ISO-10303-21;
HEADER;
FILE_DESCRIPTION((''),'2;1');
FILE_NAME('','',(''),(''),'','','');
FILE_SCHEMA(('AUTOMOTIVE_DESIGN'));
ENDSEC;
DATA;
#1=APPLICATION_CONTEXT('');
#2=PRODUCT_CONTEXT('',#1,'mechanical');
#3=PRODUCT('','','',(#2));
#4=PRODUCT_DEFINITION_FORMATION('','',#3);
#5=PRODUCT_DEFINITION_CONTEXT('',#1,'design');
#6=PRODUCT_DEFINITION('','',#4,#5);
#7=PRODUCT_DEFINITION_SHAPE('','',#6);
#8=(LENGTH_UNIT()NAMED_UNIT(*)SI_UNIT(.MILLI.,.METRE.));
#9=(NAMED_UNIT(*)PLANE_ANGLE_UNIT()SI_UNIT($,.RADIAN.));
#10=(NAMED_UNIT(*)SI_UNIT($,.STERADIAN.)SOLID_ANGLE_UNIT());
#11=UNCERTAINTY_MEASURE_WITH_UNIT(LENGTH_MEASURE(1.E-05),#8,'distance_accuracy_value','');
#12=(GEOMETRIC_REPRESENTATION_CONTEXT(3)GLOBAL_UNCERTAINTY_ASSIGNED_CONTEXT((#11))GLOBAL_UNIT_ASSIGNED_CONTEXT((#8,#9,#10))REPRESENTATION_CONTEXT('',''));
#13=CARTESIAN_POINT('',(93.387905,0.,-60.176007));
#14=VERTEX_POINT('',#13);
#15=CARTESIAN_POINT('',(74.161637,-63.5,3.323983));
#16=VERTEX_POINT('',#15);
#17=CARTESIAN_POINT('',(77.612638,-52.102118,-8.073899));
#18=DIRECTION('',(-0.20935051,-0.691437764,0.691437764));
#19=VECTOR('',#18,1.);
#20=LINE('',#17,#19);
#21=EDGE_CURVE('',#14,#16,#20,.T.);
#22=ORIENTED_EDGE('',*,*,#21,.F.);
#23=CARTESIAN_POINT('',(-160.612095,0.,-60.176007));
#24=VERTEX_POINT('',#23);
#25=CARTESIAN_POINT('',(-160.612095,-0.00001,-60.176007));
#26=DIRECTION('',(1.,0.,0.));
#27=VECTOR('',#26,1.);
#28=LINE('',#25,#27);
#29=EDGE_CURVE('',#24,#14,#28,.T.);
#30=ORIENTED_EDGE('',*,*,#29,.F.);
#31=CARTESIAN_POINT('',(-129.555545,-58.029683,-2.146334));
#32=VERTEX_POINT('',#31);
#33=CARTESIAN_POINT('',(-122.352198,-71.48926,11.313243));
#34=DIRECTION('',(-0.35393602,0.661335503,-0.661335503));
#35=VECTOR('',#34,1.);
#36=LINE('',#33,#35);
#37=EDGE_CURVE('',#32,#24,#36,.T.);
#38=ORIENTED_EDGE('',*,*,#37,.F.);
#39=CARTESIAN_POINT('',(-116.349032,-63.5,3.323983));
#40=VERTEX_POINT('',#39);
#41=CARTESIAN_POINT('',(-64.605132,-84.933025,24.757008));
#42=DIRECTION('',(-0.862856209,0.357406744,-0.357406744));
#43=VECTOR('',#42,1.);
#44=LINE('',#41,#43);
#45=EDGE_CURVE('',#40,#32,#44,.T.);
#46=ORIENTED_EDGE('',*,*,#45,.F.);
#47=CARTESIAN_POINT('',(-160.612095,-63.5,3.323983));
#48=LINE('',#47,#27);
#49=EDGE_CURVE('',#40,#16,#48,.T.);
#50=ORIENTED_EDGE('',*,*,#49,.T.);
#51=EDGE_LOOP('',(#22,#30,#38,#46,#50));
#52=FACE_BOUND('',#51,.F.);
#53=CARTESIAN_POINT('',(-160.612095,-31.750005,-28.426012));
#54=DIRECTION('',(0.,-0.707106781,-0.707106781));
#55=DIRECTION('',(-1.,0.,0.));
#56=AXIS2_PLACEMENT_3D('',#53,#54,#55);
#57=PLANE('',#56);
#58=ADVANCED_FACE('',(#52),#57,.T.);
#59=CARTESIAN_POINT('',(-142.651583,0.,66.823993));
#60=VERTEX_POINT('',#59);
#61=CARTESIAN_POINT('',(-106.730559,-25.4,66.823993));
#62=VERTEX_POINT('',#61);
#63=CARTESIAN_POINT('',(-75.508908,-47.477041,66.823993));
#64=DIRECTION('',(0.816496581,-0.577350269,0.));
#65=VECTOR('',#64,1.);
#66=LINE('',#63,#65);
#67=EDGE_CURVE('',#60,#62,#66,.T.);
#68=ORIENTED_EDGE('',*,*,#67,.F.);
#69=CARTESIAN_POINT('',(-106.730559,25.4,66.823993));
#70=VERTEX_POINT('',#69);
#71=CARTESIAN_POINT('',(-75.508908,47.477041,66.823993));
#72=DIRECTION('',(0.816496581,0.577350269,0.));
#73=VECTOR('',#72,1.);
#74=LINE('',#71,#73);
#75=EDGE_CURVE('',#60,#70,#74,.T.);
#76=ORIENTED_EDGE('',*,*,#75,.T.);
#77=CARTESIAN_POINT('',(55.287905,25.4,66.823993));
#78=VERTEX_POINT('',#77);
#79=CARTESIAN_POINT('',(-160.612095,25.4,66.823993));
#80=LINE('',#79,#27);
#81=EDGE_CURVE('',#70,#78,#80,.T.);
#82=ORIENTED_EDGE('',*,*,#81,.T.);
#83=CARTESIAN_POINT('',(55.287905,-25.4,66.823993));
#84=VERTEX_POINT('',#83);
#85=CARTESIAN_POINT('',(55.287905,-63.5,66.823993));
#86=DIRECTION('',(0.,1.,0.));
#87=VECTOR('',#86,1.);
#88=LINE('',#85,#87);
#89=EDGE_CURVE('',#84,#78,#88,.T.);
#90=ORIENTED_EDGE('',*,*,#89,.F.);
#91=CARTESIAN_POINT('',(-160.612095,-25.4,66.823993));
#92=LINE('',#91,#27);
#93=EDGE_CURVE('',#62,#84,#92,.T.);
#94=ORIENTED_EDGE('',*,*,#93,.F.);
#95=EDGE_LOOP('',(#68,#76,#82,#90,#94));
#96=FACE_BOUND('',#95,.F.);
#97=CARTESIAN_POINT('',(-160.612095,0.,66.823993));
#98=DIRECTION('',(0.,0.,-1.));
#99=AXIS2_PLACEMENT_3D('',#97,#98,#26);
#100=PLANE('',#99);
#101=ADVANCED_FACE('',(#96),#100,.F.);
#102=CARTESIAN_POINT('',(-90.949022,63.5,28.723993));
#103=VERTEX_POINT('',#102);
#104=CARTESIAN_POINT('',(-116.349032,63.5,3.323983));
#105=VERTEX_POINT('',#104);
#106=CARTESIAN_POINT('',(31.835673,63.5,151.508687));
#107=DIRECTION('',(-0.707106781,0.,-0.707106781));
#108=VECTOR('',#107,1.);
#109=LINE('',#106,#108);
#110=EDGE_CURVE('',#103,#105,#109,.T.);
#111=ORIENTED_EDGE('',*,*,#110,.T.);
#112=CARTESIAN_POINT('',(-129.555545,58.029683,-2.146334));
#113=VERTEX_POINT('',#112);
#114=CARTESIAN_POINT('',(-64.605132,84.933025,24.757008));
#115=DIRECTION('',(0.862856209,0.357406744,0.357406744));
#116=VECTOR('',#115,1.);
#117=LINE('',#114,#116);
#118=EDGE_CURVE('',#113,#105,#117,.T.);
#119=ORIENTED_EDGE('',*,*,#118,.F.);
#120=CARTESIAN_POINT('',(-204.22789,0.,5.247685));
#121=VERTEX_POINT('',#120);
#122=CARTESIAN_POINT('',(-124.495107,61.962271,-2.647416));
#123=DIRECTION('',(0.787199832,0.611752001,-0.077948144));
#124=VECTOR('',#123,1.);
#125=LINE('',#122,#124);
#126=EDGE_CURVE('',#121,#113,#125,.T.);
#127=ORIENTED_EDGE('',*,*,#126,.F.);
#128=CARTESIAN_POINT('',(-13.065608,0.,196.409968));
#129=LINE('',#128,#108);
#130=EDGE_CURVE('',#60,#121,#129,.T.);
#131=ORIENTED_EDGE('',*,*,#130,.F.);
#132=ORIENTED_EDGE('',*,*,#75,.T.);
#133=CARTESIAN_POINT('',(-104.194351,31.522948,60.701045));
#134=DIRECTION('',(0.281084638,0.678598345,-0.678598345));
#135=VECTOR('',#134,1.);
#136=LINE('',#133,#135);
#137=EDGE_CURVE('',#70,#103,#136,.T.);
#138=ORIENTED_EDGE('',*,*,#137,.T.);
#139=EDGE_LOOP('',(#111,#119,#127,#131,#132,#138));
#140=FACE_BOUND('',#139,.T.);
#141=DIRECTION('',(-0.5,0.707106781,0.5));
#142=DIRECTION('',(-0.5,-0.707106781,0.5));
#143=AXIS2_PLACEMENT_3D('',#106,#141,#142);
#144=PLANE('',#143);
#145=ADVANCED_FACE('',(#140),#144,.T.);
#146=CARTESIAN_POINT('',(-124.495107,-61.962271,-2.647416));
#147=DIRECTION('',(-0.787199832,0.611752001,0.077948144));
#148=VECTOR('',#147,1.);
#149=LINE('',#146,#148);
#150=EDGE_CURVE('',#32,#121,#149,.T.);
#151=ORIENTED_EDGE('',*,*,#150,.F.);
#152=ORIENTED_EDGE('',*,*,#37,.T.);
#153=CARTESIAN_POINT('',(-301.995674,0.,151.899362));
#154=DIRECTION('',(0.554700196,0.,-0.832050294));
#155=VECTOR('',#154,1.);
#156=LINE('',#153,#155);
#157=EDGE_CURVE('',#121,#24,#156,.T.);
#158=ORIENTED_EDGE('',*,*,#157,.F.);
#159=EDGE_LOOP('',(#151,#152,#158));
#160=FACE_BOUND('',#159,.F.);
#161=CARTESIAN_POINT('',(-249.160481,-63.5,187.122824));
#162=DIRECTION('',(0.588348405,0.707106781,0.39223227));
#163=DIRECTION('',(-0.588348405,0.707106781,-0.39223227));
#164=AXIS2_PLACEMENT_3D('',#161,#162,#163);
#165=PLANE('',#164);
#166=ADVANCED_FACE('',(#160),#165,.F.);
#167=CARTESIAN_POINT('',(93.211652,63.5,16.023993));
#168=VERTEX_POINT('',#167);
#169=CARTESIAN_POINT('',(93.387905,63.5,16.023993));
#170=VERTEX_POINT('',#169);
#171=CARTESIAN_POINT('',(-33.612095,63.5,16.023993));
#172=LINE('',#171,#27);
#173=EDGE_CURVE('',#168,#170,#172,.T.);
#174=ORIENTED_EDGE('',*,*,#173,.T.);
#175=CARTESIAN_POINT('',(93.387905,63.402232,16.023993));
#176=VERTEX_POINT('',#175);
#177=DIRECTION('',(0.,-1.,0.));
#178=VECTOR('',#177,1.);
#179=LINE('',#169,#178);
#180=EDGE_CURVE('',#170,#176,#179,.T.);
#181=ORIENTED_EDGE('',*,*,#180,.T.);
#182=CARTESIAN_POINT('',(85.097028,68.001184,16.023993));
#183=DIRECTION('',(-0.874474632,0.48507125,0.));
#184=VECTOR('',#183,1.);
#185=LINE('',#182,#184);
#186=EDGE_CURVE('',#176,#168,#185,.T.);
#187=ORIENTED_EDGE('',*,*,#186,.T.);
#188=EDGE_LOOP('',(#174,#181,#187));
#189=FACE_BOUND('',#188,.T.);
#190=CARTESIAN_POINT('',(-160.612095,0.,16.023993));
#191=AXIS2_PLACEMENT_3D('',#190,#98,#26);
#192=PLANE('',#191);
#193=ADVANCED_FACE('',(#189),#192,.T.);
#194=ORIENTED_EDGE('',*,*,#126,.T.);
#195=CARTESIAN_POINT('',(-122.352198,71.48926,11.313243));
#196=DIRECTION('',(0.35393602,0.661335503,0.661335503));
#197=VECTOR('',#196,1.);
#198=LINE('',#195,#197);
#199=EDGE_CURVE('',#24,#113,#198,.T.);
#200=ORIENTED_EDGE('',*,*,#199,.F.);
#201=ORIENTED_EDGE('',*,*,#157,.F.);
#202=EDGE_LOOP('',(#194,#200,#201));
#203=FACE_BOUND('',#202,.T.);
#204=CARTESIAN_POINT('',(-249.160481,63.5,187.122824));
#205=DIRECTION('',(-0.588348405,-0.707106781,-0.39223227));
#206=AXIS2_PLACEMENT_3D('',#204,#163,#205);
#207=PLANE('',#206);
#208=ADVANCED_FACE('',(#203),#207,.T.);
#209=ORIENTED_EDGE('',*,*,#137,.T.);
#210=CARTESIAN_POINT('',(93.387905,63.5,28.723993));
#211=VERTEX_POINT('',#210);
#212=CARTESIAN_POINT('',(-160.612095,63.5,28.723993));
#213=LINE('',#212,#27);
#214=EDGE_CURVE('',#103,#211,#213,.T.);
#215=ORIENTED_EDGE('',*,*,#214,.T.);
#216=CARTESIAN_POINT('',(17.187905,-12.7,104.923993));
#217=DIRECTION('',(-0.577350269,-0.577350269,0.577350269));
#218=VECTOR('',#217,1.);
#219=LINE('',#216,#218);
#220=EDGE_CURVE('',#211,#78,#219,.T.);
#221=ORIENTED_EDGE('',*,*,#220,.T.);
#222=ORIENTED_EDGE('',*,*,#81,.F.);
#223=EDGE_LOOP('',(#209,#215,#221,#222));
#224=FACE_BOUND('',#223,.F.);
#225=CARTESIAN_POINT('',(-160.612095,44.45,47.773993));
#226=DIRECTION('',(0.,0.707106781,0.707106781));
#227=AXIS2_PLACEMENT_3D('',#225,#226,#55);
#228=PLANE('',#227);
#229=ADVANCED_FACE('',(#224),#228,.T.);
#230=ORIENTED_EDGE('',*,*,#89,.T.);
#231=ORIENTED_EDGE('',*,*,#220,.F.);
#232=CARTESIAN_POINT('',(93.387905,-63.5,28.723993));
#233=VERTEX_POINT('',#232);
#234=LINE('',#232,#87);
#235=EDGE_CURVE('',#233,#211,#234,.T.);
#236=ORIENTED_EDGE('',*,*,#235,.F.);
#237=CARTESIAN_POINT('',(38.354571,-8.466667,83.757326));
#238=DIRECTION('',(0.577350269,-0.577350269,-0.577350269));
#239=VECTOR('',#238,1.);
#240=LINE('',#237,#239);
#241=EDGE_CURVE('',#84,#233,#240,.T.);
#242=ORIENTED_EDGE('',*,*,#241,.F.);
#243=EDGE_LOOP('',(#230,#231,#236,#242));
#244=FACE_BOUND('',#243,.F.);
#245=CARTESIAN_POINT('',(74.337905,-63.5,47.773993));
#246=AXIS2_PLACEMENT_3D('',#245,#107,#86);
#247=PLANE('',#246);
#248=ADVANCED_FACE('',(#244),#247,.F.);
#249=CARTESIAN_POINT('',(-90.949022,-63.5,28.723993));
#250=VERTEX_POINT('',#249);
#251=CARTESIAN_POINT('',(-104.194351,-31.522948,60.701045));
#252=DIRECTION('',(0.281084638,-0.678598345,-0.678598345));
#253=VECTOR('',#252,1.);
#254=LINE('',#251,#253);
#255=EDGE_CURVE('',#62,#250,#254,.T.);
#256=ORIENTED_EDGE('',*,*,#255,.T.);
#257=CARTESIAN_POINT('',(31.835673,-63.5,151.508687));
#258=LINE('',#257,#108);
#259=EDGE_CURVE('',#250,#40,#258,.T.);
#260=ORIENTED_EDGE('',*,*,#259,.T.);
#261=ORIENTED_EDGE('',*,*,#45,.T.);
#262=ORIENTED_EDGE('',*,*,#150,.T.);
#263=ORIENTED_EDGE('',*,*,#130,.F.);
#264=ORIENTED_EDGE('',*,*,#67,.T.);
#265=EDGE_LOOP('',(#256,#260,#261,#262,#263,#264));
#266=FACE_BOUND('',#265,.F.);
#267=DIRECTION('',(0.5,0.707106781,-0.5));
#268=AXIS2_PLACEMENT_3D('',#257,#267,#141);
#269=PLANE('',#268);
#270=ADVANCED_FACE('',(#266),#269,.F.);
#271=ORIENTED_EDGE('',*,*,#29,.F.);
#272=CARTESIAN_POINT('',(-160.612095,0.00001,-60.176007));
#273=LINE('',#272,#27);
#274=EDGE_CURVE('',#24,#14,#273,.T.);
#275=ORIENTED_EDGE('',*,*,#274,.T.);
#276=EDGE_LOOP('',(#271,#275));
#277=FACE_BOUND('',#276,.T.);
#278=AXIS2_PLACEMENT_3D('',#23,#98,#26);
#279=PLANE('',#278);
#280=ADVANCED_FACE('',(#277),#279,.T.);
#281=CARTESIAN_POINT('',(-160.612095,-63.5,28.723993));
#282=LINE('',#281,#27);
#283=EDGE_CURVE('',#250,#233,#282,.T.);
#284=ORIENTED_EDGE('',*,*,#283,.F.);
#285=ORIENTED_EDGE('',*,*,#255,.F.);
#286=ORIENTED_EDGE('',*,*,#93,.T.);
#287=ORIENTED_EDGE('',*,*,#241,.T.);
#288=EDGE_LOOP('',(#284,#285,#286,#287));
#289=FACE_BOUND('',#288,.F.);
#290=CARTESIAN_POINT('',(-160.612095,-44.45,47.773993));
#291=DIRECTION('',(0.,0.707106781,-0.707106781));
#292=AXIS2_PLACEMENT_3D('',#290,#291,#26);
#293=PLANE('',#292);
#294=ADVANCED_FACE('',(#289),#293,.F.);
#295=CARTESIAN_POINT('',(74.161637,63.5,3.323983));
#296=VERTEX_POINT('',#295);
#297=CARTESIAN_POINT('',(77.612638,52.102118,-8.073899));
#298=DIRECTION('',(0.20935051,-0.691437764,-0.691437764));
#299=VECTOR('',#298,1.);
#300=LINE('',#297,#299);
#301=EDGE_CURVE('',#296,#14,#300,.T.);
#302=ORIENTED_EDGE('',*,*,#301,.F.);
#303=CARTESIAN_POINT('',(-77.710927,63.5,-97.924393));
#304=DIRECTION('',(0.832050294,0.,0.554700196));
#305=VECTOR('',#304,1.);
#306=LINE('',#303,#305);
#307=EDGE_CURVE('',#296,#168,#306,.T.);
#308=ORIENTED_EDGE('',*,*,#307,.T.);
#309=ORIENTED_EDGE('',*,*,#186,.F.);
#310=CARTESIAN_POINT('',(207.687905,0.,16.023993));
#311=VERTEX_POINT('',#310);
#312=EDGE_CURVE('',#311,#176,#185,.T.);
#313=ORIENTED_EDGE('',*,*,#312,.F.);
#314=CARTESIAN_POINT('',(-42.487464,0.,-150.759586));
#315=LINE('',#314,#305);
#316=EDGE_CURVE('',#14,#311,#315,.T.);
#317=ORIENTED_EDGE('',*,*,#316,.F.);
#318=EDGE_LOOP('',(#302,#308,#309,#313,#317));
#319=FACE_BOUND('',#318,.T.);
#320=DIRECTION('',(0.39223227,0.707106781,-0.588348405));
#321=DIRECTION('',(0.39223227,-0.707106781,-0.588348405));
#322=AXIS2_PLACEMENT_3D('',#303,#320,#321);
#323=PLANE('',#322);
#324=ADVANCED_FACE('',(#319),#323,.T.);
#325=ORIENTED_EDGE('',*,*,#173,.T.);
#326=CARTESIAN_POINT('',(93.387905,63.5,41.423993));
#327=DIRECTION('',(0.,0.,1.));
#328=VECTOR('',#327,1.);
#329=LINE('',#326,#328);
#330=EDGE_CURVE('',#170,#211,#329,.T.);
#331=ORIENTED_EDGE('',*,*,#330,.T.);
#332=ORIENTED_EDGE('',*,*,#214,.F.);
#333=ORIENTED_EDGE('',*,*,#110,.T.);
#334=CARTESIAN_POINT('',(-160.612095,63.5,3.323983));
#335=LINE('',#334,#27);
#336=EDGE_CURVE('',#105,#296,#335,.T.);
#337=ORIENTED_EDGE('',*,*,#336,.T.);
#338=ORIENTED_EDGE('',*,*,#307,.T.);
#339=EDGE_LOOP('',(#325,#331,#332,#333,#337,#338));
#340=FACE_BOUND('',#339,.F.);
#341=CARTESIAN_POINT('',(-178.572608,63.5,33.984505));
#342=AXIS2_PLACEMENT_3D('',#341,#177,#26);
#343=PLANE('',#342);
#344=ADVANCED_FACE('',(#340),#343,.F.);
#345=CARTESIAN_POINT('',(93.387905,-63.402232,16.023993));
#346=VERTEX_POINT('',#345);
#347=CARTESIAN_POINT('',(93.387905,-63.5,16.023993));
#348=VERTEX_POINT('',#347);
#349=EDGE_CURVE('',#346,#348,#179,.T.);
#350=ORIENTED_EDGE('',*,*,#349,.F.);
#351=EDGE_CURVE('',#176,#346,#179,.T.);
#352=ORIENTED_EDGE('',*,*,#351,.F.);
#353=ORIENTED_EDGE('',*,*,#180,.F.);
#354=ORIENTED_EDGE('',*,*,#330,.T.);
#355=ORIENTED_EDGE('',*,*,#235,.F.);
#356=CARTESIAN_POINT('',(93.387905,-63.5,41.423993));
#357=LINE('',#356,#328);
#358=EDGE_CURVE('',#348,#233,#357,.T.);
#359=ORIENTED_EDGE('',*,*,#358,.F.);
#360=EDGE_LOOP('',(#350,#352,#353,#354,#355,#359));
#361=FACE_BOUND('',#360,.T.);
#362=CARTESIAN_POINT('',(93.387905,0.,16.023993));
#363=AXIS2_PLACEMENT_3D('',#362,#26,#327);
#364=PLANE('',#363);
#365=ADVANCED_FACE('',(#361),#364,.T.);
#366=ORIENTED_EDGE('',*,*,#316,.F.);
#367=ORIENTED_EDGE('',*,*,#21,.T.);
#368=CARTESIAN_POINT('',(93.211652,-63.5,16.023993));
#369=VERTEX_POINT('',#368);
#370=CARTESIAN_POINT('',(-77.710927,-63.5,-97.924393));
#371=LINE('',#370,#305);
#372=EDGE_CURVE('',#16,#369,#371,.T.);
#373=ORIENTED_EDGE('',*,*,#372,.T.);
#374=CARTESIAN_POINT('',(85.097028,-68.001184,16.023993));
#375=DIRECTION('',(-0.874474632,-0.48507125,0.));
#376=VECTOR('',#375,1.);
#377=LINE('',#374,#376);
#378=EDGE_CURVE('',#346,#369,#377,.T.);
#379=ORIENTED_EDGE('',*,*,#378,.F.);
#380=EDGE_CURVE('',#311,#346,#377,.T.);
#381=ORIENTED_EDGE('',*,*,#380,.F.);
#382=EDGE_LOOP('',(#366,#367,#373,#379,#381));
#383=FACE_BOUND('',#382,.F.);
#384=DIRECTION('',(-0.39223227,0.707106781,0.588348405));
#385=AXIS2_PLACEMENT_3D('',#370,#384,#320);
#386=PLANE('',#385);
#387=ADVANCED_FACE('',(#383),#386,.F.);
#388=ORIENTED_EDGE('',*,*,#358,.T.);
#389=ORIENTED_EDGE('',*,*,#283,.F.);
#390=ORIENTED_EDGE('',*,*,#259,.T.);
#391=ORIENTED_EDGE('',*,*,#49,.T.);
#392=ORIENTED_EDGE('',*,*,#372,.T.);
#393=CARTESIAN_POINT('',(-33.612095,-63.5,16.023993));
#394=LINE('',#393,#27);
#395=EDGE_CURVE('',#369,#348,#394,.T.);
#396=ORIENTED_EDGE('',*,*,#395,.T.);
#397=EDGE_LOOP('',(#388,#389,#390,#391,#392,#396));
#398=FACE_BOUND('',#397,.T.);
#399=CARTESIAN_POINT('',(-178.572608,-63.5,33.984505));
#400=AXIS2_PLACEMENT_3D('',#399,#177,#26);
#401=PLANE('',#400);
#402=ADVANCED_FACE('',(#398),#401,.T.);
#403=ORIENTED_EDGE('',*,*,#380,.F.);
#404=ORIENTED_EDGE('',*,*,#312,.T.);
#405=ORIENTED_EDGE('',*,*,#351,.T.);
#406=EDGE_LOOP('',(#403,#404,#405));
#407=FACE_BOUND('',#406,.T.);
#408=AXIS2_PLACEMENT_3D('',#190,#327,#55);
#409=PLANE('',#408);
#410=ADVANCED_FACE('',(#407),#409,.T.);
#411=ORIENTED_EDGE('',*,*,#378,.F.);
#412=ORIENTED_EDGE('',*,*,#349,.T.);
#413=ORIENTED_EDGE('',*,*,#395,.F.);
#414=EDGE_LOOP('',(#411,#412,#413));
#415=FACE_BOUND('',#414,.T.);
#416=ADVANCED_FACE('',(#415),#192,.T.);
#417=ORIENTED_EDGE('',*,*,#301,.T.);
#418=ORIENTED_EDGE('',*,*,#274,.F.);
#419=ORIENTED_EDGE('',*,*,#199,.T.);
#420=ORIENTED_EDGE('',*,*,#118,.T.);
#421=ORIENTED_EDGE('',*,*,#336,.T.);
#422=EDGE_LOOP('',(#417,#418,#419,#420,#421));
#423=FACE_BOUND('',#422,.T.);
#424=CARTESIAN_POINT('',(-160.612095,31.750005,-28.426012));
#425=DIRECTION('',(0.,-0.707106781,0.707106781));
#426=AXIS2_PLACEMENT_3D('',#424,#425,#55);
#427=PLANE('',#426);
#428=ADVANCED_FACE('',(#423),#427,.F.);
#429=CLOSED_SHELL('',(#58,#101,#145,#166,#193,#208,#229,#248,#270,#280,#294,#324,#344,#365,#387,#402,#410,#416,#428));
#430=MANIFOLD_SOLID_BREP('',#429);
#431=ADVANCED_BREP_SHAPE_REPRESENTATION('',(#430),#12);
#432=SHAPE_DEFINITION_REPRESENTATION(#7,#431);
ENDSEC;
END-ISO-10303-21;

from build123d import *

# Parameters (mm, degrees)
F0_W         = 254
F0_H         = 76.2
F1_DEPTH     = 63.5
F2_SIZE      = 63.49999
F3_DEPTH     = 63.5
F4_T1_DEPTH  = 463.9752430668
F5_T1_DEPTH  = 463.9752430668
F6_DEPTH     = 63.5
F7_T1_DEPTH  = 418.1847418685
F0_H_2       = 50.8
F8_DEPTH     = 63.5
F9_SIZE      = 38.1
F10_DEPTH    = 63.5
F11_T1_DEPTH = 463.7665363346


# Not quite as in the source:
# - a fillet or chamfer that OpenCascade refuses, or shapes differently, is made with other operations: its cross-section is extruded or revolved along the edge and cut away or added
# - a fillet or chamfer is up to 0.001 mm smaller than in the source, because OpenCascade refuses the exact size


with BuildPart() as f1:
    # F0 (on Front) → F1 (new body, symmetric)
    with BuildSketch(Plane.XZ):
        with Locations((-33.6120952994, -22.0760072346)):
            Rectangle(F0_W, F0_H)
    extrude(amount=F1_DEPTH, both=True)

    # F2 (size 63.5 in the source; OpenCascade refuses exactly that, so slightly less here)
    f2_edges = [f1.edges().sort_by_distance(p)[0] for p in [
        (-33.612095, -63.5, -60.176007),
        (-33.612095, 63.5, -60.176007),
    ]]
    chamfer(f2_edges, length=F2_SIZE)

    # F0 (on Front) → F3 (join, symmetric)
    with BuildSketch(Plane.XZ):
        Polygon((207.6879047006, 16.0239927654), (93.3879047006, 16.0239927654), (93.3879047006, -60.1760072346), align=None)
    extrude(amount=F3_DEPTH, both=True)

    # F4: chamfer of 63.5 on 1 edges, made by hand

    # F4_s2 → F4_t1 (cut)
    with BuildSketch(Plane(origin=(-98.9957457875, 0, -65.9971638583), x_dir=(0, 1, 0), z_dir=(0.8320502943, 0, 0.5547001962))):
        Polygon((-63.5, -38.3717535941), (0, -101.8717535941), (-63.5, -101.8717535941), align=None)
    extrude(amount=F4_T1_DEPTH, mode=Mode.SUBTRACT)

    # F5: chamfer of 63.5 on 1 edges, made by hand

    # F5_s2 → F5_t1 (cut)
    with BuildSketch(Plane(origin=(-98.9957457875, 0, -65.9971638583), x_dir=(0, 1, 0), z_dir=(0.8320502943, 0, 0.5547001962))):
        Polygon((63.5, -38.3717535941), (0, -101.8717535941), (63.5, -101.8717535941), align=None)
    extrude(amount=F5_T1_DEPTH, mode=Mode.SUBTRACT)

    # F0 (on Front) → F6 (join, symmetric)
    with BuildSketch(Plane.XZ):
        Polygon((-160.6120952994, -60.1760072346), (-160.6120952994, 16.0239927654), (-211.4120952994, 16.0239927654), align=None)
    extrude(amount=F6_DEPTH, both=True)

    # F7: chamfer of 63.5 on 2 edges, made by hand

    # F7_s2 → F7_t1 (cut)
    with BuildSketch(Plane(origin=(-163.0291436318, 0, 244.5437154477), x_dir=(0, 1, 0), z_dir=(0.5547001962, 0, -0.8320502943))):
        Polygon((63.5, -103.5169841892), (0, -167.0169841892), (63.5, -167.0169841892), align=None)
        Polygon((-63.5, -103.5169841892), (0, -167.0169841892), (-63.5, -167.0169841892), align=None)
    extrude(amount=F7_T1_DEPTH, mode=Mode.SUBTRACT)

    # F0 (on Front) → F8 (join, symmetric)
    with BuildSketch(Plane.XZ):
        with Locations((-33.6120952994, 41.4239927654)):
            Rectangle(F0_W, F0_H_2)
    extrude(amount=F8_DEPTH, both=True)

    # F9
    f9_edges = [f1.edges().sort_by_distance(p)[0] for p in [
        (-33.612095, -63.5, 66.823993),
        (-33.612095, 63.5, 66.823993),
        (93.387905, 0, 66.823993),
    ]]
    chamfer(f9_edges, length=F9_SIZE)

    # F0 (on Front) → F10 (join, symmetric)
    with BuildSketch(Plane.XZ):
        Polygon((-211.4120952994, 16.0239927654), (-160.6120952994, 16.0239927654), (-160.6120952994, 66.8239927654), align=None)
    extrude(amount=F10_DEPTH, both=True)

    # F11: chamfer of 76.2 on 2 edges, made by hand

    # F11_s2 → F11_t1 (cut)
    with BuildSketch(Plane(origin=(91.6721800978, 0, 91.6721800978), x_dir=(0, 1, 0), z_dir=(-0.7071067812, 0, -0.7071067812))):
        Polygon((-63.5, -84.6216001572), (12.7, -160.8216001572), (-63.5, -160.8216001572), align=None)
        Polygon((63.5, -84.6216001572), (-12.7, -160.8216001572), (63.5, -160.8216001572), align=None)
    extrude(amount=F11_T1_DEPTH, mode=Mode.SUBTRACT)


solid = f1.part
